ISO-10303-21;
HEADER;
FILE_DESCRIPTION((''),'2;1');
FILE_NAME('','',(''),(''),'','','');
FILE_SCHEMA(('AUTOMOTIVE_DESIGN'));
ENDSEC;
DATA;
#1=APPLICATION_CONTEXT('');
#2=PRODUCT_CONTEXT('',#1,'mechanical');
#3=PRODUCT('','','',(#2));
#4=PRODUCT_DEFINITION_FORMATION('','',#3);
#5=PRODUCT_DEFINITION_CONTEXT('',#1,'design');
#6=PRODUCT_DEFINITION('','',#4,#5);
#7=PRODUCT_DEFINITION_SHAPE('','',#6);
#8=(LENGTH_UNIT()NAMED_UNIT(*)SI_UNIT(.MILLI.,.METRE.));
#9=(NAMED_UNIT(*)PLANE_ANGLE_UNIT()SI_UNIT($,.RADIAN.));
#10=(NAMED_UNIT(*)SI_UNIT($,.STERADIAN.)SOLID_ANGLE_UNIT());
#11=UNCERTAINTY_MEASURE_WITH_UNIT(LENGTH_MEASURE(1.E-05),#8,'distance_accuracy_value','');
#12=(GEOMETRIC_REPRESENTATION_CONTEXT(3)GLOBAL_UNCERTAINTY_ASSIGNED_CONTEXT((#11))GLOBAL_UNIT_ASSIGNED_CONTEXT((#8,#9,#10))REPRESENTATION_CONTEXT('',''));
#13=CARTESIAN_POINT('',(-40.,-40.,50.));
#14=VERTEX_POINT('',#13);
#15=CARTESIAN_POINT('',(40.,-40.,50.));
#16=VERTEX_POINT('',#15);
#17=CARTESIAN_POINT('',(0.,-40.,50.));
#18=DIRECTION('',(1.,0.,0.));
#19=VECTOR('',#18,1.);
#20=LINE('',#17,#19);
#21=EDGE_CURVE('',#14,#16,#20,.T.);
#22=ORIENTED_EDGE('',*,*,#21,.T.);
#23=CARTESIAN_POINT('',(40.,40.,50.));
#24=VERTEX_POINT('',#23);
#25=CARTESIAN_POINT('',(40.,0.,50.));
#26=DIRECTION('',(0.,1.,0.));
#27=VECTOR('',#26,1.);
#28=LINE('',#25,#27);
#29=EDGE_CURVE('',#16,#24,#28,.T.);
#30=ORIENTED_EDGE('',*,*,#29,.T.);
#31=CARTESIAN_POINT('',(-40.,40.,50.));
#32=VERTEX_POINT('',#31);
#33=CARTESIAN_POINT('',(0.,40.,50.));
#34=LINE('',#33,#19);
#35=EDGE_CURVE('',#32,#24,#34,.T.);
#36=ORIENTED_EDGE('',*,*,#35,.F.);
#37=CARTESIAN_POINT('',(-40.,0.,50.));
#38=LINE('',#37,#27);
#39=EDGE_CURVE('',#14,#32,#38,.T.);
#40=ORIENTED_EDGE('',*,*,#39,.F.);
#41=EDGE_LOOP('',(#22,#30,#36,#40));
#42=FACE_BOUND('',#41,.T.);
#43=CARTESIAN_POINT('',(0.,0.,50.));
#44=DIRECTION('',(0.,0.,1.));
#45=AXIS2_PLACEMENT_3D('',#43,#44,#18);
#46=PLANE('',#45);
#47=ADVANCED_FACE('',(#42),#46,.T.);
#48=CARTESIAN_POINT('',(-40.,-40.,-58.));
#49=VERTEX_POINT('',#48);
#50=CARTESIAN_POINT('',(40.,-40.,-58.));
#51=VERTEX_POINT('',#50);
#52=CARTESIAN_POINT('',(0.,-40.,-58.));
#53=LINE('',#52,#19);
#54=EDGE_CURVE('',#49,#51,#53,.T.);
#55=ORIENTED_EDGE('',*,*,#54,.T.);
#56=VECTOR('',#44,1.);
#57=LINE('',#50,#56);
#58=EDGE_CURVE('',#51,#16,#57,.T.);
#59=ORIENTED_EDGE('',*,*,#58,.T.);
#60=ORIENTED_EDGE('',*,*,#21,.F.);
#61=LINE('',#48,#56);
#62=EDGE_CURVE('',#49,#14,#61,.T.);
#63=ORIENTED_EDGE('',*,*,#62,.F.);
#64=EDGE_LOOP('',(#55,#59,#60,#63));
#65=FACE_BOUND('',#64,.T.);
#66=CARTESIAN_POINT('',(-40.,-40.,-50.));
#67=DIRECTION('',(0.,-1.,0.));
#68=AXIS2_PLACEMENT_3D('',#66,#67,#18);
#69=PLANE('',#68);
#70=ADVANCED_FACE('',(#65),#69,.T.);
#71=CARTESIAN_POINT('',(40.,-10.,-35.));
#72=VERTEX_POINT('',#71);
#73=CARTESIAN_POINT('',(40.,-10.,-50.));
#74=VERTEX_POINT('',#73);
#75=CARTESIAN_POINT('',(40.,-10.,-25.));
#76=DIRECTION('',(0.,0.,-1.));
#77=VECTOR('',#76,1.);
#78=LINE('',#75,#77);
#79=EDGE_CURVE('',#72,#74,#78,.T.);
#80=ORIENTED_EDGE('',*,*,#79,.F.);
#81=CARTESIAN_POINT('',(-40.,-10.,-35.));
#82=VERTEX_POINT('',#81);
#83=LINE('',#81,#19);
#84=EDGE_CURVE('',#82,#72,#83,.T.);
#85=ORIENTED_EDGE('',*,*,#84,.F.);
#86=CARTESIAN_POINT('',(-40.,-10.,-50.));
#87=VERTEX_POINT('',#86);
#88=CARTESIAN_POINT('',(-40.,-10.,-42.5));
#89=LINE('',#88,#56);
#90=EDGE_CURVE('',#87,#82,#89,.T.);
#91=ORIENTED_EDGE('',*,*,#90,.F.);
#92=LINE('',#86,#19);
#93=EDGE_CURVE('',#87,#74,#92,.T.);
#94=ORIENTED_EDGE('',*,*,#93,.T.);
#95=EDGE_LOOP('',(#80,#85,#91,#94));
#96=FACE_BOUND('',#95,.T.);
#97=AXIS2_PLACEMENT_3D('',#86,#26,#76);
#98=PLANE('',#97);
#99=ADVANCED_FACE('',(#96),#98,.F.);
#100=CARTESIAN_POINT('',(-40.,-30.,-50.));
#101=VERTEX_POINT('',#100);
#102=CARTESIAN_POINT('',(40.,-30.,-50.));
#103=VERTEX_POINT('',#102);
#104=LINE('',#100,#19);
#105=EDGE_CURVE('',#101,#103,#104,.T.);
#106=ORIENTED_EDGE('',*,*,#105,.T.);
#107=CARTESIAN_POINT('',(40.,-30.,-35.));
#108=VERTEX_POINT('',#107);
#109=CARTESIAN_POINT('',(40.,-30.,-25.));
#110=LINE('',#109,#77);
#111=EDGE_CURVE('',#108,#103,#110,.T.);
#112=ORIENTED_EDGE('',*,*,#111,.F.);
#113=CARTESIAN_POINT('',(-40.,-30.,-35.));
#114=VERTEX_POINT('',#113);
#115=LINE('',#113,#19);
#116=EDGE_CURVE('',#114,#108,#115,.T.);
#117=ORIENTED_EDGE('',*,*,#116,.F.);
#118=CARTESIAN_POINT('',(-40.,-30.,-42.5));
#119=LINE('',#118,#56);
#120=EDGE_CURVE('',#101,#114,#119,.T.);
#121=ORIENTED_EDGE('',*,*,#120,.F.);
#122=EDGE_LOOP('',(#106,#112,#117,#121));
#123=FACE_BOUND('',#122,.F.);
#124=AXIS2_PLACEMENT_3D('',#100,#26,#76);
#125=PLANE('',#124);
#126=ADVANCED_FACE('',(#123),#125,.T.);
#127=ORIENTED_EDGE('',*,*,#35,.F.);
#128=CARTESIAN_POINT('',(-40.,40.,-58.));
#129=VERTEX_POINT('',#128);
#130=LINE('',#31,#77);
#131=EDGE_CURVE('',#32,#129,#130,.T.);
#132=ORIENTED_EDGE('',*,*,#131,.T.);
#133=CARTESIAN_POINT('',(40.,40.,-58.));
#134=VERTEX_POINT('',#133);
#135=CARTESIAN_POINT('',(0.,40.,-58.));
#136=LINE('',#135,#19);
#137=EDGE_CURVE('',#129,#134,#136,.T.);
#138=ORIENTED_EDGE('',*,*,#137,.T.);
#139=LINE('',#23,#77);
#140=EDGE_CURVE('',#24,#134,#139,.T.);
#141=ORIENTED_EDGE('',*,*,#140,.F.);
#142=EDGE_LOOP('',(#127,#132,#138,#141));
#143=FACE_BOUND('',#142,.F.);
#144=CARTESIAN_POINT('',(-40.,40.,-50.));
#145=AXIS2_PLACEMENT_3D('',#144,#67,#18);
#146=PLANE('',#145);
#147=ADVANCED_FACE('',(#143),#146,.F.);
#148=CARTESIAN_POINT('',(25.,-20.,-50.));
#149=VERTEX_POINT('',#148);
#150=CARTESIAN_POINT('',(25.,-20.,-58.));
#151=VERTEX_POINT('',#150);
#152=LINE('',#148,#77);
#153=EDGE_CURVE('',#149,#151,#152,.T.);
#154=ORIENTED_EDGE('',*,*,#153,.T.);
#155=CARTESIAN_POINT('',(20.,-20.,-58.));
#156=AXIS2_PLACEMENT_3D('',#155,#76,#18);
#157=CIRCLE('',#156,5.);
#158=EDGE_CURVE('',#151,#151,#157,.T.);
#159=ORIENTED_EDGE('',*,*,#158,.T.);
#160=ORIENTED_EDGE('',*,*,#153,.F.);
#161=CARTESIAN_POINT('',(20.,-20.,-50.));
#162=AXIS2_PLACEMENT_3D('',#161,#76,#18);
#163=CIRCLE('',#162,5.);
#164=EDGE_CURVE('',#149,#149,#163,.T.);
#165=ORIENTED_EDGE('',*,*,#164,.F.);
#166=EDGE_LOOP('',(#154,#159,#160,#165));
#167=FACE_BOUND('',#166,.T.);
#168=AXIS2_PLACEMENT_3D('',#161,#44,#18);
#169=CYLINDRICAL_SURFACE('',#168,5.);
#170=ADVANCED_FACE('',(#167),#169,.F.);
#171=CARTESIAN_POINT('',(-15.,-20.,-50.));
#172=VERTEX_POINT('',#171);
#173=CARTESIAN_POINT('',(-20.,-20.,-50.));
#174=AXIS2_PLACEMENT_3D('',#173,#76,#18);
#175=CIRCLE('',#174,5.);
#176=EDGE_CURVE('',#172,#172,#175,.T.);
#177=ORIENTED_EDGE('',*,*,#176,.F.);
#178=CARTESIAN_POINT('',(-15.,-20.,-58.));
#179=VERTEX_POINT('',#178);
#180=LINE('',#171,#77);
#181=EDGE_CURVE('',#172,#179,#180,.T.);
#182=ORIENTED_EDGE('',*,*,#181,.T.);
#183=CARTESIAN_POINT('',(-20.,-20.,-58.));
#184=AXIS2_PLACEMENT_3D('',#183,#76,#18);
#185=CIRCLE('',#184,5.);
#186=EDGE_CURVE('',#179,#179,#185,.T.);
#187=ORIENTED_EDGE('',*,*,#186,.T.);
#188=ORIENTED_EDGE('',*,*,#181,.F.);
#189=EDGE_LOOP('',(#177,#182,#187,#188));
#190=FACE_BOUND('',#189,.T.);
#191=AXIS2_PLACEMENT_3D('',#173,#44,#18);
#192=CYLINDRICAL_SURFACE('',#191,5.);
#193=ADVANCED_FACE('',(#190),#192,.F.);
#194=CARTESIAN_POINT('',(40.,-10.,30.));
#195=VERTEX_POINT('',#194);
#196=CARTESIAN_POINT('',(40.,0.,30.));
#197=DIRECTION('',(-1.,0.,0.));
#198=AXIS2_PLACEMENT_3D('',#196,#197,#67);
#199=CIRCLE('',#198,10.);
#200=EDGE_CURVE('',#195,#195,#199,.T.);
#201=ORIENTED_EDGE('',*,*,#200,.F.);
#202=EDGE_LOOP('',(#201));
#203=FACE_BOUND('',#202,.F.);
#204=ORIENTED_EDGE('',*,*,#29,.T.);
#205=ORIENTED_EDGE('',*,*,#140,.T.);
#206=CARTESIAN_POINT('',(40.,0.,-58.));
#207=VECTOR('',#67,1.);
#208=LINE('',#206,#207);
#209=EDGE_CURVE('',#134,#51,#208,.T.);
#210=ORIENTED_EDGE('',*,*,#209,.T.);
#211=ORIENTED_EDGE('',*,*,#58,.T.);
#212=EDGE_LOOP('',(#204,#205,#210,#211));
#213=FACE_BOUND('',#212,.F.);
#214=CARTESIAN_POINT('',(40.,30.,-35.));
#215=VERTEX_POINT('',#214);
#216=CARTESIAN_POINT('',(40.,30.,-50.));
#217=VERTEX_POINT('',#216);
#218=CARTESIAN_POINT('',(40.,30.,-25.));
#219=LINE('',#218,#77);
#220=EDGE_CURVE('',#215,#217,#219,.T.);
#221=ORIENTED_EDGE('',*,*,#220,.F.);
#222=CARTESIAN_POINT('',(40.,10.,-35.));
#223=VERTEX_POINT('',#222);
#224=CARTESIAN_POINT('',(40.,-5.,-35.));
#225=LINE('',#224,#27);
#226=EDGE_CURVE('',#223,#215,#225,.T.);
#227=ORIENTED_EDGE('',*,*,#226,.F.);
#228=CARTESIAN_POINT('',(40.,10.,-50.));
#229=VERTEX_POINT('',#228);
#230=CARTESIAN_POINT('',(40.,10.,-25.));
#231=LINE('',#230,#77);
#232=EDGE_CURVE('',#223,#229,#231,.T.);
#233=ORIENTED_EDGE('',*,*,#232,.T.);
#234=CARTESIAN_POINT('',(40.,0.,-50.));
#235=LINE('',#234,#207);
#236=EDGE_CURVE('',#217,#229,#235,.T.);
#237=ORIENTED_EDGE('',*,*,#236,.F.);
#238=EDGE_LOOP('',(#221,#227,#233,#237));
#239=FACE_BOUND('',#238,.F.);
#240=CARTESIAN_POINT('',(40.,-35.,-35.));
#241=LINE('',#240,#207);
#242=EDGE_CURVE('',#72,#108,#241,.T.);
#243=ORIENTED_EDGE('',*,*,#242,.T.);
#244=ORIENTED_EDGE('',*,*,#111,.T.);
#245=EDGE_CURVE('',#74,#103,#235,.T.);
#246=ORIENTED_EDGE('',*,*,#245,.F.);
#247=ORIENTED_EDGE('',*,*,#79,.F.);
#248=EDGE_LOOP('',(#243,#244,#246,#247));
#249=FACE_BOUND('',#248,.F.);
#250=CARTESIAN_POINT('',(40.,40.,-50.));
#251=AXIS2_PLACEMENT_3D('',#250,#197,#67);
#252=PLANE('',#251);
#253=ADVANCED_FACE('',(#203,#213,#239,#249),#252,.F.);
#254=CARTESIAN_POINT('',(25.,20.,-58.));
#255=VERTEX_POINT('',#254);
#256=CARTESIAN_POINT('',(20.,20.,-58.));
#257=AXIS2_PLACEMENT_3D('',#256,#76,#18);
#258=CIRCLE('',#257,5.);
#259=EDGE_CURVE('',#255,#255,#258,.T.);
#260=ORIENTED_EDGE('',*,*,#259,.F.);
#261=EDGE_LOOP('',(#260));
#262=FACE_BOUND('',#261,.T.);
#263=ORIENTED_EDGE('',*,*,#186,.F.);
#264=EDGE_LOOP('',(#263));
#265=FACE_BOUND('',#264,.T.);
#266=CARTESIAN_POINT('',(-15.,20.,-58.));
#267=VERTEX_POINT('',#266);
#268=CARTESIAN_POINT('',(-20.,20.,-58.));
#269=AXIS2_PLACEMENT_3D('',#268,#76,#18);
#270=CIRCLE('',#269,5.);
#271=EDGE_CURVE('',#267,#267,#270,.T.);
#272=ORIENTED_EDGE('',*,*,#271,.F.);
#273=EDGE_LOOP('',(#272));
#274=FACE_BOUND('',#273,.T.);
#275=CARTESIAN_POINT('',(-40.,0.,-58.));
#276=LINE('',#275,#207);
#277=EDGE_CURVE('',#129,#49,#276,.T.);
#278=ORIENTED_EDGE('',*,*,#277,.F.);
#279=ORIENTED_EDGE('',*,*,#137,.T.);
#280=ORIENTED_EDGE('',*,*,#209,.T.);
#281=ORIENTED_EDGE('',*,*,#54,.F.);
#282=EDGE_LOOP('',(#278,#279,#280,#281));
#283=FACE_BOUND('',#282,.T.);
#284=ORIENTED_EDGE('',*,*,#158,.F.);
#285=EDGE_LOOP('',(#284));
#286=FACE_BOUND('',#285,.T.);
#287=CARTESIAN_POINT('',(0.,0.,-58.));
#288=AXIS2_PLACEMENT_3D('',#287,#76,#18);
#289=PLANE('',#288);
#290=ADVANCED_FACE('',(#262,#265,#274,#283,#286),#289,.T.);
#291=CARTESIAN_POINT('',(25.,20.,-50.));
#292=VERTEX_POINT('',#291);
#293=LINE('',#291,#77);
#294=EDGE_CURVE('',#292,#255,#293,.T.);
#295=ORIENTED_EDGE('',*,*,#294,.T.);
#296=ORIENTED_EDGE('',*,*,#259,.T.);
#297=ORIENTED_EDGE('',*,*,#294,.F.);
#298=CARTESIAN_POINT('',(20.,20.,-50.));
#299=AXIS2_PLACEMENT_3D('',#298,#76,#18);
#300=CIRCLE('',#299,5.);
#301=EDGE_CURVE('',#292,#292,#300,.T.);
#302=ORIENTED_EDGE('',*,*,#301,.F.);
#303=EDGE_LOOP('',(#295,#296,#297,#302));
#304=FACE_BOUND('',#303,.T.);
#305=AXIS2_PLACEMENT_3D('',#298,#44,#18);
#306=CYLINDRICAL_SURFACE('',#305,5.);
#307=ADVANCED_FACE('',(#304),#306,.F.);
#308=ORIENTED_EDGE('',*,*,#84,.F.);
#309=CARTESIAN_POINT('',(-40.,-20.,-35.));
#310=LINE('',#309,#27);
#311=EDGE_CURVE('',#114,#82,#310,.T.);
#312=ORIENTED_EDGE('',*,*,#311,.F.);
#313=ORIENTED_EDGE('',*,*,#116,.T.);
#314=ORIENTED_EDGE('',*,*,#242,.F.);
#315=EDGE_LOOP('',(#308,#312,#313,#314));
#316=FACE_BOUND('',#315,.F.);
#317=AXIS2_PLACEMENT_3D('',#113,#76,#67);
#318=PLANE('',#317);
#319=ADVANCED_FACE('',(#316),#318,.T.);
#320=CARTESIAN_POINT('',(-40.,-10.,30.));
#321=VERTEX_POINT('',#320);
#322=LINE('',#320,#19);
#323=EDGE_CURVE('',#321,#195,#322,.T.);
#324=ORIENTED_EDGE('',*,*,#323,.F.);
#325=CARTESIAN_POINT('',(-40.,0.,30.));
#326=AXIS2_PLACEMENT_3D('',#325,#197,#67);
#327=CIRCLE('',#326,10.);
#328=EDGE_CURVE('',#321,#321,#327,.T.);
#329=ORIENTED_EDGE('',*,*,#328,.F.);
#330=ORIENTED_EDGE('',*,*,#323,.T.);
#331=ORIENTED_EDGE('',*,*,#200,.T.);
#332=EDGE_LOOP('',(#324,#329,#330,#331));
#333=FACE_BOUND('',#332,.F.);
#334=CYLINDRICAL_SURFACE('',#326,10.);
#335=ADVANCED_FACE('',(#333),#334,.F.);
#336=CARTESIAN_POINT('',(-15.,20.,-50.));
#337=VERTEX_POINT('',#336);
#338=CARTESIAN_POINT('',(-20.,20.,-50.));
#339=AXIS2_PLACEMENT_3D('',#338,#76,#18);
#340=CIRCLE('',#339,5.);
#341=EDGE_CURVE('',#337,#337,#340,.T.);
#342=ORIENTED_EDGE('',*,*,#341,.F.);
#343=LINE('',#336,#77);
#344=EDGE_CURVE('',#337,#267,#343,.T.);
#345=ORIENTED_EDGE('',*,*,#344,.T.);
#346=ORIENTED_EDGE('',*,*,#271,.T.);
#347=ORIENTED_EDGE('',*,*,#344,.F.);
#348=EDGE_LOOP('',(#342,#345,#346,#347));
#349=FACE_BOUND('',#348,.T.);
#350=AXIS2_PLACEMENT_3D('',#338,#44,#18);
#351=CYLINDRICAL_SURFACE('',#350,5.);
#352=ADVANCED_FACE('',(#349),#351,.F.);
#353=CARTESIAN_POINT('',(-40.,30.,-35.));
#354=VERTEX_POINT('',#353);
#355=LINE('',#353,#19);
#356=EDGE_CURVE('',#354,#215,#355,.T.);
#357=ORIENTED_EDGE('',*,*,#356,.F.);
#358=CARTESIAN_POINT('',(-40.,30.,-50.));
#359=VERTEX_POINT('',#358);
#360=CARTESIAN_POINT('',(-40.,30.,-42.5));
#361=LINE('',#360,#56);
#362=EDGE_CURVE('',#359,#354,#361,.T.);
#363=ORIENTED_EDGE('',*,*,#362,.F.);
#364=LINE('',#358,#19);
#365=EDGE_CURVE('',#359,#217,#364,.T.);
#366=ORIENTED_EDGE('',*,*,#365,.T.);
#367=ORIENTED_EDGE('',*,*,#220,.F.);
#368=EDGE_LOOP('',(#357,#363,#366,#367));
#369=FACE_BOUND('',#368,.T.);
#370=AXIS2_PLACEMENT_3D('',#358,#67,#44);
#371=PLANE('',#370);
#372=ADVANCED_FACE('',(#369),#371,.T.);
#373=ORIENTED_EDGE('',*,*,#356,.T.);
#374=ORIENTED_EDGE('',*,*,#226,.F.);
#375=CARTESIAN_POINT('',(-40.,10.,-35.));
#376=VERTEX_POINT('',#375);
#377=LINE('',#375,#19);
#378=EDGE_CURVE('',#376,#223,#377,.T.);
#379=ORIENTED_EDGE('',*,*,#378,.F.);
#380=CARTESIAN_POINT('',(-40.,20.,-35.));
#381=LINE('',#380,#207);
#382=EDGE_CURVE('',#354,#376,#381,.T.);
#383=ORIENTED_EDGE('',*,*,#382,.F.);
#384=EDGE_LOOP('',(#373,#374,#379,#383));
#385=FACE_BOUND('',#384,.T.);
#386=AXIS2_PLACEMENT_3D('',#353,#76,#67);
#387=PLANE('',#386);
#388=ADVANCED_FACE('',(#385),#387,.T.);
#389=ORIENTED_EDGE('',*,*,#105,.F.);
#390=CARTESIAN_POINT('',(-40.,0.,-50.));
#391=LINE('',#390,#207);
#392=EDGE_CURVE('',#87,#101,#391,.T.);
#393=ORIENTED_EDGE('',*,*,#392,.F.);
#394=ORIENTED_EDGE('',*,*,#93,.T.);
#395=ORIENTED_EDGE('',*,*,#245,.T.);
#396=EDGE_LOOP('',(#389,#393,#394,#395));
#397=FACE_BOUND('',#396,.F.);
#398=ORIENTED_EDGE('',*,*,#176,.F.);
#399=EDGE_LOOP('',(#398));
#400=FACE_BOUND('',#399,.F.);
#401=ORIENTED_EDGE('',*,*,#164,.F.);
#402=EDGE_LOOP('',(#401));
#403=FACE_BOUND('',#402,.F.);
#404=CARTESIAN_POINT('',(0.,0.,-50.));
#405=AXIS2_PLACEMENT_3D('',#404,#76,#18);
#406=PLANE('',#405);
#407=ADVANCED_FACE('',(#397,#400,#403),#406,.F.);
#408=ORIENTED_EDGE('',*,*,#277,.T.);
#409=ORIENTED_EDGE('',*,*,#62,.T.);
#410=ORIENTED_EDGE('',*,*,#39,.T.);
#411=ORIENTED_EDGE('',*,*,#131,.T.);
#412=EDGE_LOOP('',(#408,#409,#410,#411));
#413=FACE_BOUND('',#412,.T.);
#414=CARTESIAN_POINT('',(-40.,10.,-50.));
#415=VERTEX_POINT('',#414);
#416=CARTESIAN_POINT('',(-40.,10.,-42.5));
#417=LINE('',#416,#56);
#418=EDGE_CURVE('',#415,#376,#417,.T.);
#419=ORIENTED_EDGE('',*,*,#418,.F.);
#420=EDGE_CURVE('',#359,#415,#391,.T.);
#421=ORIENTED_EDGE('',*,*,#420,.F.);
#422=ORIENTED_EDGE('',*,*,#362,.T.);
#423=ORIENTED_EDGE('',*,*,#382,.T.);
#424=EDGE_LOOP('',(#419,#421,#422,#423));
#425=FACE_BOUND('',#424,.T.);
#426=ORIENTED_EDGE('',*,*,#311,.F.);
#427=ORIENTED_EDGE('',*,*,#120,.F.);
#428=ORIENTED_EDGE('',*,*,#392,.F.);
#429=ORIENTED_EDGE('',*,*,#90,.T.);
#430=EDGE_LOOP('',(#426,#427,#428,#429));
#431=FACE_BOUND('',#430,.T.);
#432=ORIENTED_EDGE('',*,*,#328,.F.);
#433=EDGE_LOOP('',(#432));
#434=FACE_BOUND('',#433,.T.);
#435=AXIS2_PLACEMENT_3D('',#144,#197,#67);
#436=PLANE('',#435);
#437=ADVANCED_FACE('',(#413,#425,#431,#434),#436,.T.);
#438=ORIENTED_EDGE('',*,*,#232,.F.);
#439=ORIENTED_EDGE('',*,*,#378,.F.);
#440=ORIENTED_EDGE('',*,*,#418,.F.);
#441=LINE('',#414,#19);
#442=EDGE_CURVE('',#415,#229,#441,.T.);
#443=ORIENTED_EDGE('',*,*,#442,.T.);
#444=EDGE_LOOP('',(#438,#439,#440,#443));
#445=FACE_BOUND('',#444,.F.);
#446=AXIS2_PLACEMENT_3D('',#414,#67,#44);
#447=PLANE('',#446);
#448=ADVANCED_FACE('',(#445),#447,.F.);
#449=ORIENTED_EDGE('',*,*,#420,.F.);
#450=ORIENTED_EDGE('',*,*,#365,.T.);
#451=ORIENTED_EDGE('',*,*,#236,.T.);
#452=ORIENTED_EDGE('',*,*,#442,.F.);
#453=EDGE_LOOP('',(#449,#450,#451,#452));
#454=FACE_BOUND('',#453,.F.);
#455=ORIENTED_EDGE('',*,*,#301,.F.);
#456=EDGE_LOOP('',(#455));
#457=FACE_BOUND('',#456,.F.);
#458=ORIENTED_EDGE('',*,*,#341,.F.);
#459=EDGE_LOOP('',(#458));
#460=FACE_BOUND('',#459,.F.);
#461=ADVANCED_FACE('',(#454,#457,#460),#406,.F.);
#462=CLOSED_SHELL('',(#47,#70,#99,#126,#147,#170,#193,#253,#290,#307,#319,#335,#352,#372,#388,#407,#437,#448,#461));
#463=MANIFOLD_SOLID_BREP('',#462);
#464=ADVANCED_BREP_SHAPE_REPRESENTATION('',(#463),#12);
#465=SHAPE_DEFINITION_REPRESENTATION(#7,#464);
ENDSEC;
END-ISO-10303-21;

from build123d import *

# Parameters (mm, degrees)
F0_W     = 80
F0_H     = 80
F1_DEPTH = 50
F2_R     = 5
F3_DEPTH = 10
F4_R     = 10
F5_DEPTH = 86.1
F6_W     = 20
F6_H     = 15
F7_DEPTH = 84.6
F2_W     = 80
F2_H     = 80
F8_DEPTH = 8


# Not quite as in the source:
# - a pattern or mirror of a feature is missing from the dataset's text; its kind, count and spacing are read off the source's solid


with BuildPart() as f1:
    # F0 (on Top) → F1 (new body, symmetric)
    with BuildSketch(Plane.XY):
        Rectangle(F0_W, F0_H)
    extrude(amount=F1_DEPTH, both=True)

    # F2 (on face) → F3 (cut)
    with BuildSketch(Plane(origin=(0, 0, -50), x_dir=(1, 0, 0), z_dir=(0, 0, -1))):
        with Locations((-20, 20)):
            Circle(F2_R)
        with Locations((-20, -20)):
            Circle(F2_R)
        with Locations((20, -20)):
            Circle(F2_R)
        with Locations((20, 20)):
            Circle(F2_R)
    extrude(amount=-F3_DEPTH, mode=Mode.SUBTRACT)

    # F4 (on face) → F5 (cut)
    with BuildSketch(Plane(origin=(-40, 0, 0), x_dir=(0, -1, 0), z_dir=(-1, 0, 0))):
        with Locations((0, 30)):
            Circle(F4_R)
    extrude(amount=-F5_DEPTH, mode=Mode.SUBTRACT)

    # F6 (on face) → F7 (cut)
    with BuildSketch(Plane(origin=(-40, 0, 0), x_dir=(0, -1, 0), z_dir=(-1, 0, 0))):
        with Locations((-20, -42.5)):
            Rectangle(F6_W, F6_H)
    f7 = extrude(amount=-F7_DEPTH, mode=Mode.SUBTRACT)

    # F7_copies: F7 across plane
    add(f7.mirror(Plane(origin=(0, 0, 0), x_dir=(0, 0, -1), z_dir=(0, -1, 0))), mode=Mode.SUBTRACT)

    # F2 (on face) → F8 (join)
    with BuildSketch(Plane(origin=(0, 0, -50), x_dir=(1, 0, 0), z_dir=(0, 0, -1))):
        Rectangle(F2_W, F2_H)
        with Locations((-20, -20)):
            Circle(F2_R, mode=Mode.SUBTRACT)
        with Locations((20, -20)):
            Circle(F2_R, mode=Mode.SUBTRACT)
        with Locations((-20, 20)):
            Circle(F2_R, mode=Mode.SUBTRACT)
        with Locations((20, 20)):
            Circle(F2_R, mode=Mode.SUBTRACT)
    extrude(amount=F8_DEPTH)


solid = f1.part
